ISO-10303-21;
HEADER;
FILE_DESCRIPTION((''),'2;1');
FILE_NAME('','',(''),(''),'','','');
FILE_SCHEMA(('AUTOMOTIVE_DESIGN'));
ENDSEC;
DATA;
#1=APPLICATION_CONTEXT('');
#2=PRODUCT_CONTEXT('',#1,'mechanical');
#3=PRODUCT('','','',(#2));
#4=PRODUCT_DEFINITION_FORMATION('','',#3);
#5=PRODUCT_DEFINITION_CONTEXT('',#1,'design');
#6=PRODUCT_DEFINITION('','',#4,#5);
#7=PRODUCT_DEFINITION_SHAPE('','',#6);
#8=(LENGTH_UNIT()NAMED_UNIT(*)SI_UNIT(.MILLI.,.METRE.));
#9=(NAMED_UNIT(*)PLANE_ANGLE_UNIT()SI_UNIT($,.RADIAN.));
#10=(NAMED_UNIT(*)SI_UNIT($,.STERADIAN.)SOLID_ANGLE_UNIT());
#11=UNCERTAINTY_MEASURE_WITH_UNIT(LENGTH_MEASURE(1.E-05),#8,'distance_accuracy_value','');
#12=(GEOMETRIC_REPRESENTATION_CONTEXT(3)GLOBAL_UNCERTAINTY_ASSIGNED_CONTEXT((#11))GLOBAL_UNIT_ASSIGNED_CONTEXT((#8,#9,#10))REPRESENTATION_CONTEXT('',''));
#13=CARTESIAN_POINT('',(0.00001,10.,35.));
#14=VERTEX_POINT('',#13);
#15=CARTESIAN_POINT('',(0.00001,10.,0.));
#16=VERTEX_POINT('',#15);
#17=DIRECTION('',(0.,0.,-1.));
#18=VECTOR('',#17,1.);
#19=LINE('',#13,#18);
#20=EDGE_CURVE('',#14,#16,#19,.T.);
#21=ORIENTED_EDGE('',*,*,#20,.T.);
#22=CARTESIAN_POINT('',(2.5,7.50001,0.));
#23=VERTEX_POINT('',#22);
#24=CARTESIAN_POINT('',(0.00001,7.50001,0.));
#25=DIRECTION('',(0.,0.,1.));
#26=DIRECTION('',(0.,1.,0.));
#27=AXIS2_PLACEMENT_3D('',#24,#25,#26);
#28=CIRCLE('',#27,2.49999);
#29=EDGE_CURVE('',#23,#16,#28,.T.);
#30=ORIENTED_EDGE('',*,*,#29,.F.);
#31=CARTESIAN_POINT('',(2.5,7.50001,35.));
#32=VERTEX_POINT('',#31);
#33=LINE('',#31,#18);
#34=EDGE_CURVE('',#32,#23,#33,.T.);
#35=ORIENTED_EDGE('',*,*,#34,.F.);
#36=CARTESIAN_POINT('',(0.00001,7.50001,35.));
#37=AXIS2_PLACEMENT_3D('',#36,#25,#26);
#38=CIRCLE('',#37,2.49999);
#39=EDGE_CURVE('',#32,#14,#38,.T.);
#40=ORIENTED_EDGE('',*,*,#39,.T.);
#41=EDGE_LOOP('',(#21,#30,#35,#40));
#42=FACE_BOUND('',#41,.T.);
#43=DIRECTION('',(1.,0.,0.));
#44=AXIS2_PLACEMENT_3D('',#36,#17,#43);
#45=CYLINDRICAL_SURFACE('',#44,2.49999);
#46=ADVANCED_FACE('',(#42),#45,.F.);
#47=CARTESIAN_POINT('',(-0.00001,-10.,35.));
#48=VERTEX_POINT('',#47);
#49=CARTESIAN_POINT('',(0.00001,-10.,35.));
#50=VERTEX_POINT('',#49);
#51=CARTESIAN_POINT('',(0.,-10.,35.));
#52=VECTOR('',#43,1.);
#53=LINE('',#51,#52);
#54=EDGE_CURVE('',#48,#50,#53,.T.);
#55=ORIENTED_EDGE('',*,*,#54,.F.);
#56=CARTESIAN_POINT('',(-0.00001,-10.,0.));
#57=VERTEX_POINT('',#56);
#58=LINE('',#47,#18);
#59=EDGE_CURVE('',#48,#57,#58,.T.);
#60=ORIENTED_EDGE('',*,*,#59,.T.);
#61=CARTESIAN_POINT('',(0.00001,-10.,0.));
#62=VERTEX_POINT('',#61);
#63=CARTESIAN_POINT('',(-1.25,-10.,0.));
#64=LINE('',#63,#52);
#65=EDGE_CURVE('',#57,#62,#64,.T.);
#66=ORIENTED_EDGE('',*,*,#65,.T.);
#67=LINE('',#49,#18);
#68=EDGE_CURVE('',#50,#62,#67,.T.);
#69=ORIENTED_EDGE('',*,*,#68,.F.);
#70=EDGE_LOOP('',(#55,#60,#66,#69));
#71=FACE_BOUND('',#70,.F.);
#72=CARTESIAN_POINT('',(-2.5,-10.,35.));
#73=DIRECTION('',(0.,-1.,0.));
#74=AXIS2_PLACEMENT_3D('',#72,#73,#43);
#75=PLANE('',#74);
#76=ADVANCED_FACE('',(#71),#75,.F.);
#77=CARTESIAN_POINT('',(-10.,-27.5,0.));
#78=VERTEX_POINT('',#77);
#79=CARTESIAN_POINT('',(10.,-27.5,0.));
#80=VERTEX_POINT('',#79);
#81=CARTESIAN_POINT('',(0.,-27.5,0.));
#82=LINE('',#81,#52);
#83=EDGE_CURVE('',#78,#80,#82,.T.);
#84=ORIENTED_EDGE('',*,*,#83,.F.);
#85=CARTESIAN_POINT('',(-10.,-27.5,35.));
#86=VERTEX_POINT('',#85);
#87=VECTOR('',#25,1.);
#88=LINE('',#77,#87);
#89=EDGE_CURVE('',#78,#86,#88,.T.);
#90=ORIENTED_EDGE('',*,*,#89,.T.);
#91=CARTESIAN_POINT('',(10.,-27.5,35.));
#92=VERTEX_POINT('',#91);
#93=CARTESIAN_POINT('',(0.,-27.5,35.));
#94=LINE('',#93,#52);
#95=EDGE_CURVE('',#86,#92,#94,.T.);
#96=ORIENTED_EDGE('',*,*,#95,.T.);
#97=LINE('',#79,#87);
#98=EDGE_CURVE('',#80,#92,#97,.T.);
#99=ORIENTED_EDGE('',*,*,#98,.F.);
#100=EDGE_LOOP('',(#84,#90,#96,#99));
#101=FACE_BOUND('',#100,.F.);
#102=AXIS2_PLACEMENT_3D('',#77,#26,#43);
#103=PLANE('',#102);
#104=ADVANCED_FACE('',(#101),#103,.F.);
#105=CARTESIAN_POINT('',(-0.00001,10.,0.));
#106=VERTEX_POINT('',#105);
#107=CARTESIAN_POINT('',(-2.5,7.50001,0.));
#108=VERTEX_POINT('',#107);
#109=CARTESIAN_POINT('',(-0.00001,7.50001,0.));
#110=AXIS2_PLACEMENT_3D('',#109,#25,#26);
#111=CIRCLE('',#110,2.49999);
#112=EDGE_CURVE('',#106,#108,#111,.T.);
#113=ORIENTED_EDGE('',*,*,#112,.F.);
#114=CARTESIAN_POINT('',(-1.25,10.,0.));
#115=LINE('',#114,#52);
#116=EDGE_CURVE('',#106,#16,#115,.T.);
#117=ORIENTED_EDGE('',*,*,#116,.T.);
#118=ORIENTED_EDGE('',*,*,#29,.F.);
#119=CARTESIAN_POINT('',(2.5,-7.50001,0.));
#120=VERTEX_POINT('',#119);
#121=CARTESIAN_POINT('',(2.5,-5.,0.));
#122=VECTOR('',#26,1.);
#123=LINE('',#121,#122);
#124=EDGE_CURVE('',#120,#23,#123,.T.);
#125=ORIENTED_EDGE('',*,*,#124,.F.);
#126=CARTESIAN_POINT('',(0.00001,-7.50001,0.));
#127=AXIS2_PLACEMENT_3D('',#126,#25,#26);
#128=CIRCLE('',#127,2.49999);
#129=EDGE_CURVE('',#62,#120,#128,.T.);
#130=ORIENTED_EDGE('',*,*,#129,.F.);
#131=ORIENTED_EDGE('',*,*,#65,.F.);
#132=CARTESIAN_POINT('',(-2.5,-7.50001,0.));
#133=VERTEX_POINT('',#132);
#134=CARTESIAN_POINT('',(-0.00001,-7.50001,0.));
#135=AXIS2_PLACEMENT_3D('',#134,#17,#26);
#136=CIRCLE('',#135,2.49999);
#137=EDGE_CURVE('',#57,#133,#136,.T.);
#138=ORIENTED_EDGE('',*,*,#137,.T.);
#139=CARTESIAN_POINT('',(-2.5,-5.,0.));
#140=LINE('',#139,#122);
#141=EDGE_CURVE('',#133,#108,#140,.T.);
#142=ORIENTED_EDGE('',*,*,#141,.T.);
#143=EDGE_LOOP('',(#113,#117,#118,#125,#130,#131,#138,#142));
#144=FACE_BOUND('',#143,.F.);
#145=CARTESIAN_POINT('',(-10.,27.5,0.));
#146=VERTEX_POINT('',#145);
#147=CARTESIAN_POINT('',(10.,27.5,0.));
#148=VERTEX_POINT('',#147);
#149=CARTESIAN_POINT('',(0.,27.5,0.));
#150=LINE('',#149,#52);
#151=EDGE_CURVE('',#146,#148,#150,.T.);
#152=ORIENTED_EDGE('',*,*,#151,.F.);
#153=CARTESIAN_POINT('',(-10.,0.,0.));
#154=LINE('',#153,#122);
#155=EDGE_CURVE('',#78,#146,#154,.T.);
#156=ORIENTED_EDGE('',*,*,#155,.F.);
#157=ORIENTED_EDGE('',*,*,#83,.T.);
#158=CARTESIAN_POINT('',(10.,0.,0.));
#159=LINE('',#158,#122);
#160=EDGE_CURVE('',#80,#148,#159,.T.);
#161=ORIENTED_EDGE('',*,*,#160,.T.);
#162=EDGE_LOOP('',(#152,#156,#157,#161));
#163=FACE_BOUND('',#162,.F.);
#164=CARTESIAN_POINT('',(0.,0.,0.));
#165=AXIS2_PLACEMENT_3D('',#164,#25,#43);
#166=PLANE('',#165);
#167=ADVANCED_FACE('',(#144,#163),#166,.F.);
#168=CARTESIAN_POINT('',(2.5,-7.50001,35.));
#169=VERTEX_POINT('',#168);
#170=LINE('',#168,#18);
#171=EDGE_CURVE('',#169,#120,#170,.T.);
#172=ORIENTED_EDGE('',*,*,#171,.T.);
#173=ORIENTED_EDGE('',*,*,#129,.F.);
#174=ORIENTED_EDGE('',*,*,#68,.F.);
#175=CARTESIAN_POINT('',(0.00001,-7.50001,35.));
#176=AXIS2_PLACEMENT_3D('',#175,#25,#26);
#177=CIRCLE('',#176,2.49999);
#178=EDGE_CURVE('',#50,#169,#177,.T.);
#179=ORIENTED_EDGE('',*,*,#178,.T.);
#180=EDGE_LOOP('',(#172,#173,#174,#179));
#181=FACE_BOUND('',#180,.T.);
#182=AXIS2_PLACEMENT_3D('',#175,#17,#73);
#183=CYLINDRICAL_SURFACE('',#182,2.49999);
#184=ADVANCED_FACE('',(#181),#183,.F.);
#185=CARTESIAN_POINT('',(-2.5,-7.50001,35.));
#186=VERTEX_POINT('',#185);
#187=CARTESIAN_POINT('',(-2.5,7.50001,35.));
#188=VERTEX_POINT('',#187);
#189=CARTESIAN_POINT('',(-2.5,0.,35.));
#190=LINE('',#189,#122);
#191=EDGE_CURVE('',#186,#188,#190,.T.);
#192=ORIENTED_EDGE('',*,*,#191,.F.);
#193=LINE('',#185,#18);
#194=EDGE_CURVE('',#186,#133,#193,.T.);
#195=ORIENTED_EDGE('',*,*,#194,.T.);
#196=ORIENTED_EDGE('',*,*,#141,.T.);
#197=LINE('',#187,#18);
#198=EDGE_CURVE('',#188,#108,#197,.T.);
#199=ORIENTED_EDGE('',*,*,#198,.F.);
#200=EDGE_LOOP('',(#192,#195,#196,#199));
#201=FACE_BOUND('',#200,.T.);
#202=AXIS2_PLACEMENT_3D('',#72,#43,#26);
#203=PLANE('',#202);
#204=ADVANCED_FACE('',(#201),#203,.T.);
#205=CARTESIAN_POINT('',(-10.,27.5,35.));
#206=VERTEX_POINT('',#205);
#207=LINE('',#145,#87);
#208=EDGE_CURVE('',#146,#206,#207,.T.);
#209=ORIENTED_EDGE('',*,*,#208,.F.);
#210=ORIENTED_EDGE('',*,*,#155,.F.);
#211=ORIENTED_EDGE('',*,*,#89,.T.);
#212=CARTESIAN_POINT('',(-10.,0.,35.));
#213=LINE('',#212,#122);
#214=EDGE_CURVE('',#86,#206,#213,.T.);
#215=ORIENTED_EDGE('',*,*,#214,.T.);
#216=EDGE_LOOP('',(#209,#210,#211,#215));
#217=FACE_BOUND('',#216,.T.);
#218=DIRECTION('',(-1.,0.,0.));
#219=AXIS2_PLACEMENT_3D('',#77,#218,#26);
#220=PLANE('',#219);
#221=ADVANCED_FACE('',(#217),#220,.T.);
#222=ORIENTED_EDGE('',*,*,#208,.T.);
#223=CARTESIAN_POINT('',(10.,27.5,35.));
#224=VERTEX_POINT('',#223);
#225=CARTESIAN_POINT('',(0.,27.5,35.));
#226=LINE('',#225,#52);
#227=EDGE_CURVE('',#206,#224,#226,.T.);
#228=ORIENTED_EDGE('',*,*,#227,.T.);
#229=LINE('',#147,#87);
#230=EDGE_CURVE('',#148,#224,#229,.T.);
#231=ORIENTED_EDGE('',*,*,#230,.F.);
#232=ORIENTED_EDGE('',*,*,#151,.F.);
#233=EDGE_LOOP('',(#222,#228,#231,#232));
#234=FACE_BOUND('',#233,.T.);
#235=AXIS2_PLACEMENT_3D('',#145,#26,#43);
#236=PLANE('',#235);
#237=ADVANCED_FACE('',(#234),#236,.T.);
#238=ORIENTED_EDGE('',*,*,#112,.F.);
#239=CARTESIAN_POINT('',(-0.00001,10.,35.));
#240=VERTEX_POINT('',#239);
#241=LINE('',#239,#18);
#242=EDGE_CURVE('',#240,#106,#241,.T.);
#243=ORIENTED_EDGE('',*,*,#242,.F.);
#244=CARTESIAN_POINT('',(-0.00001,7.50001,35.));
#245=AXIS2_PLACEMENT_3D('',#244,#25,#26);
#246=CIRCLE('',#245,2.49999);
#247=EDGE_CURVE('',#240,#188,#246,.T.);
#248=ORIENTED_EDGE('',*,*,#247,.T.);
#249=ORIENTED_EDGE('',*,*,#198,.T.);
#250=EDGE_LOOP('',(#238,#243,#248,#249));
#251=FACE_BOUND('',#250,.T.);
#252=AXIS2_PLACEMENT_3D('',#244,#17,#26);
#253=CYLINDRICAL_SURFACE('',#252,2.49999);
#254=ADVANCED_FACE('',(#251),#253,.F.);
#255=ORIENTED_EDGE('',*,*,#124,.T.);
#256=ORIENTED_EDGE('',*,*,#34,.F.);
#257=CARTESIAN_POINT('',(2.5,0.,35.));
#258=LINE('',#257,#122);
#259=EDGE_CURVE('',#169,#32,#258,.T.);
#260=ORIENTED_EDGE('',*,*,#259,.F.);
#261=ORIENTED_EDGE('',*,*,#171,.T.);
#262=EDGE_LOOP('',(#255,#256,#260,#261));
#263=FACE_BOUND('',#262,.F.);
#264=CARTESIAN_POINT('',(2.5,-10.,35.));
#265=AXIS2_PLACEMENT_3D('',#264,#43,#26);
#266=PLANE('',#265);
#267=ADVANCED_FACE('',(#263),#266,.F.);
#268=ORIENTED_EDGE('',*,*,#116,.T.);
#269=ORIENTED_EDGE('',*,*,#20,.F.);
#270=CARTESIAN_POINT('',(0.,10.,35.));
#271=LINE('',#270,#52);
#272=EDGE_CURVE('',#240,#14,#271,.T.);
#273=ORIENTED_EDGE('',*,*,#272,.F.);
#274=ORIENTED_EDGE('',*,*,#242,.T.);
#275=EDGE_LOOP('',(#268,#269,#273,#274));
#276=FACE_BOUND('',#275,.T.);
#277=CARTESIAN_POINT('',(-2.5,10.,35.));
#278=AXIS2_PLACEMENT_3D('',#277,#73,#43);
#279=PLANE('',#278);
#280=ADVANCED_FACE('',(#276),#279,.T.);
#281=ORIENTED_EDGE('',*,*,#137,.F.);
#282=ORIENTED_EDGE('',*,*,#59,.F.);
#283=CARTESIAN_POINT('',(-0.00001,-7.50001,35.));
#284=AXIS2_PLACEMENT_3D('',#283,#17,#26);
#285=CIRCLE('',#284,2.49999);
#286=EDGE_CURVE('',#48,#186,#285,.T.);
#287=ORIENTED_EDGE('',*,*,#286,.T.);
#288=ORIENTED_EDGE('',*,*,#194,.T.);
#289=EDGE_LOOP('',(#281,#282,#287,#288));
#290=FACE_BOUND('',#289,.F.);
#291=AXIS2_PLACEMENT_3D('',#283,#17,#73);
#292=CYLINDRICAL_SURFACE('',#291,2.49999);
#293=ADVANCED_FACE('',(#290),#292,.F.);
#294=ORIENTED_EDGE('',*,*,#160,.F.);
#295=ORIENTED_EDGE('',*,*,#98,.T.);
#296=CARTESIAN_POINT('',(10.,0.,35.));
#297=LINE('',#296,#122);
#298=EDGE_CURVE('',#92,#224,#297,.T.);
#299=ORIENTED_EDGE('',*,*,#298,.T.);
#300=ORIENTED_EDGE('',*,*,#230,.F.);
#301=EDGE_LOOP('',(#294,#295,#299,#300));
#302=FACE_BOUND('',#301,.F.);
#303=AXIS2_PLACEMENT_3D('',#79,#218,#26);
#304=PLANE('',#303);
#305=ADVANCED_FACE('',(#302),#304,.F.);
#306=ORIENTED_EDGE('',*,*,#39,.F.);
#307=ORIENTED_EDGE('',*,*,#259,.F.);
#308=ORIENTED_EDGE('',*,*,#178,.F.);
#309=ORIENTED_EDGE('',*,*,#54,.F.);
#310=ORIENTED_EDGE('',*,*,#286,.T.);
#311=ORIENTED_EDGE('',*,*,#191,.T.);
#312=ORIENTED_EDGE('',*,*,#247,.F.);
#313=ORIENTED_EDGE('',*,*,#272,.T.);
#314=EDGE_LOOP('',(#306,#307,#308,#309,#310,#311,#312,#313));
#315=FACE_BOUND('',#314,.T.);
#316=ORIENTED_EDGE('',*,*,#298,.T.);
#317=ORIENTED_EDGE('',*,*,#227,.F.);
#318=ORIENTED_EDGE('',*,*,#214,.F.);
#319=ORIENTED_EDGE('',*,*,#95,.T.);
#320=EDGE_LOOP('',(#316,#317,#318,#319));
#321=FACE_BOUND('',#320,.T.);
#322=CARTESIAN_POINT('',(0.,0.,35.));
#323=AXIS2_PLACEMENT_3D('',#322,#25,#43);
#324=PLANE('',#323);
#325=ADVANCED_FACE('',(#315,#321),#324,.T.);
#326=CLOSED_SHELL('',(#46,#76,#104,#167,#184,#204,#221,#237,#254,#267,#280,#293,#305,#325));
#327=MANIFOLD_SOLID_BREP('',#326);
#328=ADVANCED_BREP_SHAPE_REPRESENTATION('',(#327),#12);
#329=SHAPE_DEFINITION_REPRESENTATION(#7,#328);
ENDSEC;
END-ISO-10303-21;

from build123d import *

# Parameters (mm, degrees)
F0_W     = 20
F0_H     = 55
F1_DEPTH = 35
F2_W     = 5
F2_H     = 20
F3_DEPTH = 35.001
F4_R     = 2.49999


# Not quite as in the source:
# - a fillet or chamfer is up to 0.001 mm smaller than in the source, because OpenCascade refuses the exact size


with BuildPart() as f1:
    # F0 (on Top) → F1 (new body)
    with BuildSketch(Plane.XY):
        Rectangle(F0_W, F0_H)
    extrude(amount=F1_DEPTH)

    # F2 (on face) → F3 (cut, through all)
    with BuildSketch(Plane.XY.offset(35)):
        Rectangle(F2_W, F2_H)
    extrude(amount=-F3_DEPTH, mode=Mode.SUBTRACT)

    # F4 (radius 2.5 in the source; OpenCascade refuses exactly that, so slightly less here)
    f4_edges = [f1.edges().sort_by_distance(p)[0] for p in [
        (-2.5, 10, 17.5),
        (2.5, 10, 17.5),
        (2.5, -10, 17.5),
        (-2.5, -10, 17.5),
    ]]
    fillet(f4_edges, radius=F4_R)


solid = f1.part
